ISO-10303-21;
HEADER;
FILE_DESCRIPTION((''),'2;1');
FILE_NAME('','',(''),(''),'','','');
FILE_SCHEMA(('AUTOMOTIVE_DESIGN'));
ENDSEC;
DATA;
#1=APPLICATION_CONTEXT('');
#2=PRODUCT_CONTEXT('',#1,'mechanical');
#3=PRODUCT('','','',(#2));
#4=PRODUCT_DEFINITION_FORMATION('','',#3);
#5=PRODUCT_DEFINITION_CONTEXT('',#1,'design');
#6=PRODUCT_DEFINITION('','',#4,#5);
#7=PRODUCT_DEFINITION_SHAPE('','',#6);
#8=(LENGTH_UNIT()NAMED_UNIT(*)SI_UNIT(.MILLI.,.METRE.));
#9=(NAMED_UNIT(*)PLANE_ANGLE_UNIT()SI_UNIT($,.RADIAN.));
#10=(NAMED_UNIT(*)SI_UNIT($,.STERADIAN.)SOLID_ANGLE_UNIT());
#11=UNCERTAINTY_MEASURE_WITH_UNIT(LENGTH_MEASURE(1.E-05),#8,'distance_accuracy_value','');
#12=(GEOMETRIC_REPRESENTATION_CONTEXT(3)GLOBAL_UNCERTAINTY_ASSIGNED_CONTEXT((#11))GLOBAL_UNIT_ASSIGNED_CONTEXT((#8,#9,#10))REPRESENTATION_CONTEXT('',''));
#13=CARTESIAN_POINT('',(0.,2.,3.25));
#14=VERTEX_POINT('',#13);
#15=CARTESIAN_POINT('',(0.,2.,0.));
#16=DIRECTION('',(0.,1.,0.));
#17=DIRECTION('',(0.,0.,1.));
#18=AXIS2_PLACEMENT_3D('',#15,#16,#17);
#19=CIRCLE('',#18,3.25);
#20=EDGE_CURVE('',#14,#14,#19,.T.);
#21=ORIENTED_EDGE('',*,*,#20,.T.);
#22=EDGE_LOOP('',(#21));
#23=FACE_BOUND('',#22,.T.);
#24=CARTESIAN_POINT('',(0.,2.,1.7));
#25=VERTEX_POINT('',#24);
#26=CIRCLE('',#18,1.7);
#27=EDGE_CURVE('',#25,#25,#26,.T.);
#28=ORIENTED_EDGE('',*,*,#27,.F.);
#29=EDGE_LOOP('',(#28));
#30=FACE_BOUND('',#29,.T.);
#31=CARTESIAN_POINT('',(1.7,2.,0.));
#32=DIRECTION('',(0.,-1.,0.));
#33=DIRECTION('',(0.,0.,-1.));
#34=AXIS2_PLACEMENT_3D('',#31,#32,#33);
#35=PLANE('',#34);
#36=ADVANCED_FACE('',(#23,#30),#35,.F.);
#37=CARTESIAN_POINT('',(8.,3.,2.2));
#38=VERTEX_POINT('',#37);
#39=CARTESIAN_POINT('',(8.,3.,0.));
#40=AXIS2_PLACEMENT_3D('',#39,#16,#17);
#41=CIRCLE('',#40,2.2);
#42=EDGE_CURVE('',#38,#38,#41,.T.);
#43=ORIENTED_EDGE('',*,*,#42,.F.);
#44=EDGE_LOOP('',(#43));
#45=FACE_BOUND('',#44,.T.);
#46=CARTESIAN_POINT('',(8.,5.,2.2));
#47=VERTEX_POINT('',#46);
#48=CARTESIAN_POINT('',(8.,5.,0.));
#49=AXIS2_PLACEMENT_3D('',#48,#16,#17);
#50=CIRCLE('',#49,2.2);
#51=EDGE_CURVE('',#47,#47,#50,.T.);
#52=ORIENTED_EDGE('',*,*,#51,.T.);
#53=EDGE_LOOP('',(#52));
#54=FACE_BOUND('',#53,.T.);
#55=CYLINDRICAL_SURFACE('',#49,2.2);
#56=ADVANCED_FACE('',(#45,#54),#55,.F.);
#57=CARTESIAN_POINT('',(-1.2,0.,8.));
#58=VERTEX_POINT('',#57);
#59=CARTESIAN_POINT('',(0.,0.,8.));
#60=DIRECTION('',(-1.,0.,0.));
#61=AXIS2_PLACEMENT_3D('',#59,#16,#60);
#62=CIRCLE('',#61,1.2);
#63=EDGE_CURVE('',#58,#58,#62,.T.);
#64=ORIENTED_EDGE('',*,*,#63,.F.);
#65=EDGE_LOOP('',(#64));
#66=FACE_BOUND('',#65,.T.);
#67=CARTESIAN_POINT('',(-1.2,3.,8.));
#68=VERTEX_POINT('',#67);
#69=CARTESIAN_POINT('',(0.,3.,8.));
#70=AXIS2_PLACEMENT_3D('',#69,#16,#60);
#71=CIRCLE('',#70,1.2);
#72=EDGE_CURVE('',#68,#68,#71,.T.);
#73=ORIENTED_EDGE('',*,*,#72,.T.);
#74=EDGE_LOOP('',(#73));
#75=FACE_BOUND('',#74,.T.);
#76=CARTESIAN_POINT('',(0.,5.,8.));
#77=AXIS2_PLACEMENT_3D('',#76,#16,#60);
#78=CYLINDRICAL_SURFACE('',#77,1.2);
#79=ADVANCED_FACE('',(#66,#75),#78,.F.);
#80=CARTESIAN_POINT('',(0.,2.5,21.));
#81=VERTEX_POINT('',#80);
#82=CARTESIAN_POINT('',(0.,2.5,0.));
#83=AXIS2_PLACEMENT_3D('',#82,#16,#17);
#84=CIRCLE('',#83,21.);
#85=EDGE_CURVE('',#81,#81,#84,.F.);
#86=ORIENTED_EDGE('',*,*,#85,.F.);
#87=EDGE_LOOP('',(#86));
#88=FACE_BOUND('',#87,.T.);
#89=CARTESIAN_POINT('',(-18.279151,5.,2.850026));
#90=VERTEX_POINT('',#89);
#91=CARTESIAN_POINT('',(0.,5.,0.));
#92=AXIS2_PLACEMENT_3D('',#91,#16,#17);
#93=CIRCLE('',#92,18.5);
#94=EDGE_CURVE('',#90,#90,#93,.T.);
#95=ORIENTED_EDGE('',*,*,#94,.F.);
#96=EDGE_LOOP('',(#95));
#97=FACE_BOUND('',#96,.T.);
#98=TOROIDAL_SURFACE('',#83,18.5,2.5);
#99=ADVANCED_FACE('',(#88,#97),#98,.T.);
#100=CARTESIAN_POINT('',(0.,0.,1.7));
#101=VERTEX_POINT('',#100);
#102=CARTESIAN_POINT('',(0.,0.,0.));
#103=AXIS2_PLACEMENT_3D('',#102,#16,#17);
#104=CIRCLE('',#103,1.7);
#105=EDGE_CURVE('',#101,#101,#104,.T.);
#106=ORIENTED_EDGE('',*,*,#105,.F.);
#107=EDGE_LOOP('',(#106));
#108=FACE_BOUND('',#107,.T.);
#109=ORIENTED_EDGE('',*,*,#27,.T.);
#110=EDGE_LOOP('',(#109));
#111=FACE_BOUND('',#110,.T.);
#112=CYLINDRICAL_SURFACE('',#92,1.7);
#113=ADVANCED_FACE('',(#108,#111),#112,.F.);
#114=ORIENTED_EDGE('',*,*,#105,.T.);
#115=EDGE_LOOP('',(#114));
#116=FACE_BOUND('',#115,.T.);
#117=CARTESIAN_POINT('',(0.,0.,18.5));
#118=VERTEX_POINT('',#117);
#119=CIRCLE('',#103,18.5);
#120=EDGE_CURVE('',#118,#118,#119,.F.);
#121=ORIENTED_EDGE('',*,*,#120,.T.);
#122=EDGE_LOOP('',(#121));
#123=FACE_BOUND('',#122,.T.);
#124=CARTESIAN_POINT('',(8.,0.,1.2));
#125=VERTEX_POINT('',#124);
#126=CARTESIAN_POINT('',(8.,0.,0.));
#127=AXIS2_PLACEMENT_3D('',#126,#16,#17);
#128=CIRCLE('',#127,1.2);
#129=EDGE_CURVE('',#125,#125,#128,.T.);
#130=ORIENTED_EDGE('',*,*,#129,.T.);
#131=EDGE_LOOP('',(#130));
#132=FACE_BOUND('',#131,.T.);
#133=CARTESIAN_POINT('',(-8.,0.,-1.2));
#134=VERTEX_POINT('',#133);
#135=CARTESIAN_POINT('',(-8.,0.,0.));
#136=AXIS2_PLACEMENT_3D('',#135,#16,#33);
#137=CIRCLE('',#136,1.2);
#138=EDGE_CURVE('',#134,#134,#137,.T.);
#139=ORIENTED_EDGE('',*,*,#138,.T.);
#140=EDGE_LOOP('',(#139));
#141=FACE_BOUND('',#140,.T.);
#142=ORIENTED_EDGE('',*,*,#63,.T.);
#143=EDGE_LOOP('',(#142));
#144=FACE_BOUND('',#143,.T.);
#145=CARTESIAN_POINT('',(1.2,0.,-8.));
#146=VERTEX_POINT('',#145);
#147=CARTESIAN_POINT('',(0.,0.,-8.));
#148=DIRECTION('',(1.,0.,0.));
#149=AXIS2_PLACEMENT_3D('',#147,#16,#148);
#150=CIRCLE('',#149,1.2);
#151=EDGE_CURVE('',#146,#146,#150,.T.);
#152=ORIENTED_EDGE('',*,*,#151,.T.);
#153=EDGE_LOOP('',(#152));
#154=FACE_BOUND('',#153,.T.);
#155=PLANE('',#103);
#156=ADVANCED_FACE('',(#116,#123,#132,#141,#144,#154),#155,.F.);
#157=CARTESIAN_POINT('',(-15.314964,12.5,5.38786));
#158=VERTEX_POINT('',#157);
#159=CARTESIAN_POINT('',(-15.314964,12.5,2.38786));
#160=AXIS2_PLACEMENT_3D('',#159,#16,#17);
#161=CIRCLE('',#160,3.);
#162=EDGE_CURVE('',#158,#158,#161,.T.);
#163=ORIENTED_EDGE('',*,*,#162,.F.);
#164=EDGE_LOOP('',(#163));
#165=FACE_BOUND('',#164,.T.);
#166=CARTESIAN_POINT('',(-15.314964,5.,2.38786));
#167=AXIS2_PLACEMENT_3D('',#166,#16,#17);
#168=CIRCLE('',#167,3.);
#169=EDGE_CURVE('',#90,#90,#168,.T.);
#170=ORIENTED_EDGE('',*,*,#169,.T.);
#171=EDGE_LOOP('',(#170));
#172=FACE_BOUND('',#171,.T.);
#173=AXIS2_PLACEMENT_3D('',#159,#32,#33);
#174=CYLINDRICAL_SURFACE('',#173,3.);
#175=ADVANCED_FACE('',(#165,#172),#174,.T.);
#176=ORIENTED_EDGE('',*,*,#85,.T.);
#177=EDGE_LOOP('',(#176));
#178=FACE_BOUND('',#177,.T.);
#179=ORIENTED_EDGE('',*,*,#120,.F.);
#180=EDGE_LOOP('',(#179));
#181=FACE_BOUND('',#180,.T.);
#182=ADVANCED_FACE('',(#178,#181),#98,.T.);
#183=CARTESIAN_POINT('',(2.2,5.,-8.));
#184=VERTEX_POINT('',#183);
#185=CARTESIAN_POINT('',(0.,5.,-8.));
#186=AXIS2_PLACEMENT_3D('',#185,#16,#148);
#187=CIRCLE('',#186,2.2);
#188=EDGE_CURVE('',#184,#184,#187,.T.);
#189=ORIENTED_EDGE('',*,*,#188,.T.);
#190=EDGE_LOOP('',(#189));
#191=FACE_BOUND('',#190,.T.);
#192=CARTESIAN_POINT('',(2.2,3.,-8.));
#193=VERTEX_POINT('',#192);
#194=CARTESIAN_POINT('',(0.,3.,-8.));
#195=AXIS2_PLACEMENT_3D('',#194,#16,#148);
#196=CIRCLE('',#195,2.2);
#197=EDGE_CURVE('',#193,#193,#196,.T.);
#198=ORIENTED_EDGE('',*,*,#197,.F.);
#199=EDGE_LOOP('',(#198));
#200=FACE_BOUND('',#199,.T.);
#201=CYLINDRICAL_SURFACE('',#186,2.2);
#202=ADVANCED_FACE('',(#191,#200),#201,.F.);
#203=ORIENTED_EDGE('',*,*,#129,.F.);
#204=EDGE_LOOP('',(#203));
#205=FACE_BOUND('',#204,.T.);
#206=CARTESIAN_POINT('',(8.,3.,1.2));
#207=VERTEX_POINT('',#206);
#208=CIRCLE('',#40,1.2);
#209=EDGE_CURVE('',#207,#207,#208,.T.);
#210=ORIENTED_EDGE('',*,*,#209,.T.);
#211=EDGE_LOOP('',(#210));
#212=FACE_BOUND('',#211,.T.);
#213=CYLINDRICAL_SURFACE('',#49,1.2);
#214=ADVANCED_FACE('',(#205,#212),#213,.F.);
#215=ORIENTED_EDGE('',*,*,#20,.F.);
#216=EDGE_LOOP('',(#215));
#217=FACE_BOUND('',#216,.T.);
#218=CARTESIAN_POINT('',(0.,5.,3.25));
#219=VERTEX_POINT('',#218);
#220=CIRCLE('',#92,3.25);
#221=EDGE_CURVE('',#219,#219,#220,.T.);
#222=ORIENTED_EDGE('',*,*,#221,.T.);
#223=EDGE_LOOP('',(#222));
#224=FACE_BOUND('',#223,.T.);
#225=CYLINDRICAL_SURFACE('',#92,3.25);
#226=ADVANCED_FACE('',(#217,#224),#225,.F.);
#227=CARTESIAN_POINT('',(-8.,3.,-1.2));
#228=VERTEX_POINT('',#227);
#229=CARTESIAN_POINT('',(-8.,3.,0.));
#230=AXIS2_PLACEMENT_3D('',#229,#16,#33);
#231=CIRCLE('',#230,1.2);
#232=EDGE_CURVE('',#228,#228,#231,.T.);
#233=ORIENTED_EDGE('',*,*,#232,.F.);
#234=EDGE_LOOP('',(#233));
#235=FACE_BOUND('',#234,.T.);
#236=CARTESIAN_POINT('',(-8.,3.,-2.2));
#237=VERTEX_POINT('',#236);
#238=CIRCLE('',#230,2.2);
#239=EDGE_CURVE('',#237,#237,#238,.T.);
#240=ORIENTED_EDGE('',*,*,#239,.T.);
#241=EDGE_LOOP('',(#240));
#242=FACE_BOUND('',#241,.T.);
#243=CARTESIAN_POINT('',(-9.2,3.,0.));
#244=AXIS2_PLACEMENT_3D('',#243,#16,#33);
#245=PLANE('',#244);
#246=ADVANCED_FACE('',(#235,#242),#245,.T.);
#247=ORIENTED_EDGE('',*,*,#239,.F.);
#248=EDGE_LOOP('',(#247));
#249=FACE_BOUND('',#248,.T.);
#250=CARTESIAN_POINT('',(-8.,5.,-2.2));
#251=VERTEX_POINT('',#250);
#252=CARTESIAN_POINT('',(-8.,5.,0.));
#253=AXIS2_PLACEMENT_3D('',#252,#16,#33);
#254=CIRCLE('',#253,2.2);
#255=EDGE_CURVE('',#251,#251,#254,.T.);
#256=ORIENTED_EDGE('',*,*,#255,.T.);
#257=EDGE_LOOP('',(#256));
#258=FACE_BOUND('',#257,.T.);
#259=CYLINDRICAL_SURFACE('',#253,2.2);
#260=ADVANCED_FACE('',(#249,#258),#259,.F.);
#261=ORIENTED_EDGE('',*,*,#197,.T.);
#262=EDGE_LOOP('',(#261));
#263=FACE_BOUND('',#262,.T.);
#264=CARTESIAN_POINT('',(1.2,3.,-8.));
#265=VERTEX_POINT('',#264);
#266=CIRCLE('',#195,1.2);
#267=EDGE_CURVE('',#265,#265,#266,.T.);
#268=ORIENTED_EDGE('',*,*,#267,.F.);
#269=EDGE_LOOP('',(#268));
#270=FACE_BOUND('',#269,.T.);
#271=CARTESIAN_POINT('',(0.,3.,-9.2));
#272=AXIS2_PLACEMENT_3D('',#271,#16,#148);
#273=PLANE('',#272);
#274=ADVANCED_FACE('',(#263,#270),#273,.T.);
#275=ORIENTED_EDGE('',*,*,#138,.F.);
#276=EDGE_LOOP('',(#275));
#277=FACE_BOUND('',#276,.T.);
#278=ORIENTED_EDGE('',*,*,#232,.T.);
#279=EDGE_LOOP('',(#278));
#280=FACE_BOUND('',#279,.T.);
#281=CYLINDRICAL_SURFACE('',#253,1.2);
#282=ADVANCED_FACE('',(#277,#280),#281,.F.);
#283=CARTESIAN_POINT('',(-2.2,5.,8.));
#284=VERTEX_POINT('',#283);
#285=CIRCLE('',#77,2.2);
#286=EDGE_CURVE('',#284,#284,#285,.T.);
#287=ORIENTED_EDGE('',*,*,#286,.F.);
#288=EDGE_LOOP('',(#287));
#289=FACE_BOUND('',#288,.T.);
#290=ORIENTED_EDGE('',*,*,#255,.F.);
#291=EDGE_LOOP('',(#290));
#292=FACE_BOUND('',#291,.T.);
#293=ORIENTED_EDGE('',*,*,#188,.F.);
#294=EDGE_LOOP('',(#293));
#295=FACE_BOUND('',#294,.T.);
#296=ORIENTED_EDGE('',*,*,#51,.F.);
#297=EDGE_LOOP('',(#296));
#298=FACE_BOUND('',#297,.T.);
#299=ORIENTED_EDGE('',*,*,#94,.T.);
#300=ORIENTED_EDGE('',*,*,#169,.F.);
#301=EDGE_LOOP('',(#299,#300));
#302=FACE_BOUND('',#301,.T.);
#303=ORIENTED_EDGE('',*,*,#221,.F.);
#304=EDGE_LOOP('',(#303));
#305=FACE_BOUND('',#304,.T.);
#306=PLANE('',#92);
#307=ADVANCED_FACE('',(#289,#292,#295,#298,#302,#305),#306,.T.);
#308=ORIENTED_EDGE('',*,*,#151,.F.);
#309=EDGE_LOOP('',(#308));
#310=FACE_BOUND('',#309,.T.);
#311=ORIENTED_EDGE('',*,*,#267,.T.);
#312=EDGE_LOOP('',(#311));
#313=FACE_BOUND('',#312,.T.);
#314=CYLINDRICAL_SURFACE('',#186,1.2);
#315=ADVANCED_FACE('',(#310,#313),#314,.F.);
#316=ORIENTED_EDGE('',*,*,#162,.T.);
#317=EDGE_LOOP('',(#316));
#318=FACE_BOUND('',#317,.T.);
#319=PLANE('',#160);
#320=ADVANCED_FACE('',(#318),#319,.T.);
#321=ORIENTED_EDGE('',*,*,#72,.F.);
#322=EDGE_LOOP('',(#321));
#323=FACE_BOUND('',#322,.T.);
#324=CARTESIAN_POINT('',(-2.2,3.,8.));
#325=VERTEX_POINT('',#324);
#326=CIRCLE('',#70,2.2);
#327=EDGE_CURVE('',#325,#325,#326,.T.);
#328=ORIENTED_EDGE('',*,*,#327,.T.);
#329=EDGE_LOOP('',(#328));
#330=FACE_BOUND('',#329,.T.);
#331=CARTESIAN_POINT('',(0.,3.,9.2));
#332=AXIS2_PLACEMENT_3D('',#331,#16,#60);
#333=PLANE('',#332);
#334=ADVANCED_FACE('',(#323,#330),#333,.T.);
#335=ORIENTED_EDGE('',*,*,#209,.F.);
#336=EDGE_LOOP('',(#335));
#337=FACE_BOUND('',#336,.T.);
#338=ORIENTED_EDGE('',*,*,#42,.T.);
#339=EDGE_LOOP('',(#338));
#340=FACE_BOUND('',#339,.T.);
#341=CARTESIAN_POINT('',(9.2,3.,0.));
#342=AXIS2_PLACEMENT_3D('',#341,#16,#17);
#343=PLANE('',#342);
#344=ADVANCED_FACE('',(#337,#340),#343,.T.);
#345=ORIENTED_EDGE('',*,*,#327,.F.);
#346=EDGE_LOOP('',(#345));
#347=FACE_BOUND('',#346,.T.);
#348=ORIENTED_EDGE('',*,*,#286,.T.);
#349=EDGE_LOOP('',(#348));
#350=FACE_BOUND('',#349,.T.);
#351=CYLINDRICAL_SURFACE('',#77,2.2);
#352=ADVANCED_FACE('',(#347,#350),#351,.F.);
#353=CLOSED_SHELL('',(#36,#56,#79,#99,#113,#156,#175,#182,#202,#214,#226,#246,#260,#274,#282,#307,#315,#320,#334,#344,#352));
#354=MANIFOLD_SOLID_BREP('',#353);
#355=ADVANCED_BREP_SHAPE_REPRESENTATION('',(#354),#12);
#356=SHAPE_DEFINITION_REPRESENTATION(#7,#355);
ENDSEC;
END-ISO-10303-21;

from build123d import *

# Parameters (mm, degrees)
SKETCH1_R                      = 21
BOSS_EXTRUDE1_DEPTH            = 5
FILLET1_R                      = 2.5
SKETCH2_R                      = 3
BOSS_EXTRUDE2_DEPTH            = 7.5
CBORE_FOR_M3_SHCS1_D           = 3.4
CBORE_FOR_M3_SHCS1_CBORE_D     = 6.5
CBORE_FOR_M3_SHCS1_CBORE_DEPTH = 3
CIRPATTERN1_COUNT              = 4


with BuildPart() as part:
    # Sketch1 → Boss-Extrude1 (new body)
    with BuildSketch(Plane(origin=(0, 0, 0), x_dir=(1, 0, 0), z_dir=(0, 1, 0))):
        with Locations(Location((0, 0, 0), (0, 0, 270))):
            Circle(SKETCH1_R)
    extrude(amount=BOSS_EXTRUDE1_DEPTH)

    # Fillet1
    fillet1_edges = [part.edges().sort_by_distance(p)[0] for p in [
        (0, 0, -21),
        (0, 5, -21),
    ]]
    fillet(fillet1_edges, radius=FILLET1_R - 0.0001)  # a hair under: the kernel refuses the full size

    # Sketch2 → Boss-Extrude2 (add)
    with BuildSketch(Plane(origin=(0, 5, 0), x_dir=(1, 0, 0), z_dir=(0, 1, 0))):
        with Locations(Location((-15.314964139, -2.387859588, 0), (0, 0, 188.862019992))):
            Circle(SKETCH2_R)
    extrude(amount=BOSS_EXTRUDE2_DEPTH)

    # CBORE for M3 SHCS1 (through all)
    with Locations(Plane(origin=(0, 5, 0), x_dir=(1, 0, 0), z_dir=(0, 1, 0))):
        with Locations((0, 0)):
            CounterBoreHole(CBORE_FOR_M3_SHCS1_D / 2, CBORE_FOR_M3_SHCS1_CBORE_D / 2, CBORE_FOR_M3_SHCS1_CBORE_DEPTH)

    # Sketch10 → CBORe for M2 (revolve, cut)
    with BuildSketch(Plane.XY, mode=Mode.PRIVATE) as cbore_for_m2_sk:
        Polygon((8, 5), (8, 0), (9.2, 0), (9.2, 3), (10.2, 3), (10.2, 5), align=None)
    cbore_for_m2 = revolve(cbore_for_m2_sk.sketch.rotate(Axis((8, 5, 0), (0, -1, 0)), 90), axis=Axis((8, 5, 0), (0, -1, 0)), mode=Mode.SUBTRACT)

    # CirPattern1: CBORe for M2 ×4 about axis
    cirpattern1_axis = Axis((0, 0, 0), (0, 1, 0))
    for i in range(1, CIRPATTERN1_COUNT):
        add(cbore_for_m2.rotate(cirpattern1_axis, i * 360 / CIRPATTERN1_COUNT), mode=Mode.SUBTRACT)


solid = part.part
